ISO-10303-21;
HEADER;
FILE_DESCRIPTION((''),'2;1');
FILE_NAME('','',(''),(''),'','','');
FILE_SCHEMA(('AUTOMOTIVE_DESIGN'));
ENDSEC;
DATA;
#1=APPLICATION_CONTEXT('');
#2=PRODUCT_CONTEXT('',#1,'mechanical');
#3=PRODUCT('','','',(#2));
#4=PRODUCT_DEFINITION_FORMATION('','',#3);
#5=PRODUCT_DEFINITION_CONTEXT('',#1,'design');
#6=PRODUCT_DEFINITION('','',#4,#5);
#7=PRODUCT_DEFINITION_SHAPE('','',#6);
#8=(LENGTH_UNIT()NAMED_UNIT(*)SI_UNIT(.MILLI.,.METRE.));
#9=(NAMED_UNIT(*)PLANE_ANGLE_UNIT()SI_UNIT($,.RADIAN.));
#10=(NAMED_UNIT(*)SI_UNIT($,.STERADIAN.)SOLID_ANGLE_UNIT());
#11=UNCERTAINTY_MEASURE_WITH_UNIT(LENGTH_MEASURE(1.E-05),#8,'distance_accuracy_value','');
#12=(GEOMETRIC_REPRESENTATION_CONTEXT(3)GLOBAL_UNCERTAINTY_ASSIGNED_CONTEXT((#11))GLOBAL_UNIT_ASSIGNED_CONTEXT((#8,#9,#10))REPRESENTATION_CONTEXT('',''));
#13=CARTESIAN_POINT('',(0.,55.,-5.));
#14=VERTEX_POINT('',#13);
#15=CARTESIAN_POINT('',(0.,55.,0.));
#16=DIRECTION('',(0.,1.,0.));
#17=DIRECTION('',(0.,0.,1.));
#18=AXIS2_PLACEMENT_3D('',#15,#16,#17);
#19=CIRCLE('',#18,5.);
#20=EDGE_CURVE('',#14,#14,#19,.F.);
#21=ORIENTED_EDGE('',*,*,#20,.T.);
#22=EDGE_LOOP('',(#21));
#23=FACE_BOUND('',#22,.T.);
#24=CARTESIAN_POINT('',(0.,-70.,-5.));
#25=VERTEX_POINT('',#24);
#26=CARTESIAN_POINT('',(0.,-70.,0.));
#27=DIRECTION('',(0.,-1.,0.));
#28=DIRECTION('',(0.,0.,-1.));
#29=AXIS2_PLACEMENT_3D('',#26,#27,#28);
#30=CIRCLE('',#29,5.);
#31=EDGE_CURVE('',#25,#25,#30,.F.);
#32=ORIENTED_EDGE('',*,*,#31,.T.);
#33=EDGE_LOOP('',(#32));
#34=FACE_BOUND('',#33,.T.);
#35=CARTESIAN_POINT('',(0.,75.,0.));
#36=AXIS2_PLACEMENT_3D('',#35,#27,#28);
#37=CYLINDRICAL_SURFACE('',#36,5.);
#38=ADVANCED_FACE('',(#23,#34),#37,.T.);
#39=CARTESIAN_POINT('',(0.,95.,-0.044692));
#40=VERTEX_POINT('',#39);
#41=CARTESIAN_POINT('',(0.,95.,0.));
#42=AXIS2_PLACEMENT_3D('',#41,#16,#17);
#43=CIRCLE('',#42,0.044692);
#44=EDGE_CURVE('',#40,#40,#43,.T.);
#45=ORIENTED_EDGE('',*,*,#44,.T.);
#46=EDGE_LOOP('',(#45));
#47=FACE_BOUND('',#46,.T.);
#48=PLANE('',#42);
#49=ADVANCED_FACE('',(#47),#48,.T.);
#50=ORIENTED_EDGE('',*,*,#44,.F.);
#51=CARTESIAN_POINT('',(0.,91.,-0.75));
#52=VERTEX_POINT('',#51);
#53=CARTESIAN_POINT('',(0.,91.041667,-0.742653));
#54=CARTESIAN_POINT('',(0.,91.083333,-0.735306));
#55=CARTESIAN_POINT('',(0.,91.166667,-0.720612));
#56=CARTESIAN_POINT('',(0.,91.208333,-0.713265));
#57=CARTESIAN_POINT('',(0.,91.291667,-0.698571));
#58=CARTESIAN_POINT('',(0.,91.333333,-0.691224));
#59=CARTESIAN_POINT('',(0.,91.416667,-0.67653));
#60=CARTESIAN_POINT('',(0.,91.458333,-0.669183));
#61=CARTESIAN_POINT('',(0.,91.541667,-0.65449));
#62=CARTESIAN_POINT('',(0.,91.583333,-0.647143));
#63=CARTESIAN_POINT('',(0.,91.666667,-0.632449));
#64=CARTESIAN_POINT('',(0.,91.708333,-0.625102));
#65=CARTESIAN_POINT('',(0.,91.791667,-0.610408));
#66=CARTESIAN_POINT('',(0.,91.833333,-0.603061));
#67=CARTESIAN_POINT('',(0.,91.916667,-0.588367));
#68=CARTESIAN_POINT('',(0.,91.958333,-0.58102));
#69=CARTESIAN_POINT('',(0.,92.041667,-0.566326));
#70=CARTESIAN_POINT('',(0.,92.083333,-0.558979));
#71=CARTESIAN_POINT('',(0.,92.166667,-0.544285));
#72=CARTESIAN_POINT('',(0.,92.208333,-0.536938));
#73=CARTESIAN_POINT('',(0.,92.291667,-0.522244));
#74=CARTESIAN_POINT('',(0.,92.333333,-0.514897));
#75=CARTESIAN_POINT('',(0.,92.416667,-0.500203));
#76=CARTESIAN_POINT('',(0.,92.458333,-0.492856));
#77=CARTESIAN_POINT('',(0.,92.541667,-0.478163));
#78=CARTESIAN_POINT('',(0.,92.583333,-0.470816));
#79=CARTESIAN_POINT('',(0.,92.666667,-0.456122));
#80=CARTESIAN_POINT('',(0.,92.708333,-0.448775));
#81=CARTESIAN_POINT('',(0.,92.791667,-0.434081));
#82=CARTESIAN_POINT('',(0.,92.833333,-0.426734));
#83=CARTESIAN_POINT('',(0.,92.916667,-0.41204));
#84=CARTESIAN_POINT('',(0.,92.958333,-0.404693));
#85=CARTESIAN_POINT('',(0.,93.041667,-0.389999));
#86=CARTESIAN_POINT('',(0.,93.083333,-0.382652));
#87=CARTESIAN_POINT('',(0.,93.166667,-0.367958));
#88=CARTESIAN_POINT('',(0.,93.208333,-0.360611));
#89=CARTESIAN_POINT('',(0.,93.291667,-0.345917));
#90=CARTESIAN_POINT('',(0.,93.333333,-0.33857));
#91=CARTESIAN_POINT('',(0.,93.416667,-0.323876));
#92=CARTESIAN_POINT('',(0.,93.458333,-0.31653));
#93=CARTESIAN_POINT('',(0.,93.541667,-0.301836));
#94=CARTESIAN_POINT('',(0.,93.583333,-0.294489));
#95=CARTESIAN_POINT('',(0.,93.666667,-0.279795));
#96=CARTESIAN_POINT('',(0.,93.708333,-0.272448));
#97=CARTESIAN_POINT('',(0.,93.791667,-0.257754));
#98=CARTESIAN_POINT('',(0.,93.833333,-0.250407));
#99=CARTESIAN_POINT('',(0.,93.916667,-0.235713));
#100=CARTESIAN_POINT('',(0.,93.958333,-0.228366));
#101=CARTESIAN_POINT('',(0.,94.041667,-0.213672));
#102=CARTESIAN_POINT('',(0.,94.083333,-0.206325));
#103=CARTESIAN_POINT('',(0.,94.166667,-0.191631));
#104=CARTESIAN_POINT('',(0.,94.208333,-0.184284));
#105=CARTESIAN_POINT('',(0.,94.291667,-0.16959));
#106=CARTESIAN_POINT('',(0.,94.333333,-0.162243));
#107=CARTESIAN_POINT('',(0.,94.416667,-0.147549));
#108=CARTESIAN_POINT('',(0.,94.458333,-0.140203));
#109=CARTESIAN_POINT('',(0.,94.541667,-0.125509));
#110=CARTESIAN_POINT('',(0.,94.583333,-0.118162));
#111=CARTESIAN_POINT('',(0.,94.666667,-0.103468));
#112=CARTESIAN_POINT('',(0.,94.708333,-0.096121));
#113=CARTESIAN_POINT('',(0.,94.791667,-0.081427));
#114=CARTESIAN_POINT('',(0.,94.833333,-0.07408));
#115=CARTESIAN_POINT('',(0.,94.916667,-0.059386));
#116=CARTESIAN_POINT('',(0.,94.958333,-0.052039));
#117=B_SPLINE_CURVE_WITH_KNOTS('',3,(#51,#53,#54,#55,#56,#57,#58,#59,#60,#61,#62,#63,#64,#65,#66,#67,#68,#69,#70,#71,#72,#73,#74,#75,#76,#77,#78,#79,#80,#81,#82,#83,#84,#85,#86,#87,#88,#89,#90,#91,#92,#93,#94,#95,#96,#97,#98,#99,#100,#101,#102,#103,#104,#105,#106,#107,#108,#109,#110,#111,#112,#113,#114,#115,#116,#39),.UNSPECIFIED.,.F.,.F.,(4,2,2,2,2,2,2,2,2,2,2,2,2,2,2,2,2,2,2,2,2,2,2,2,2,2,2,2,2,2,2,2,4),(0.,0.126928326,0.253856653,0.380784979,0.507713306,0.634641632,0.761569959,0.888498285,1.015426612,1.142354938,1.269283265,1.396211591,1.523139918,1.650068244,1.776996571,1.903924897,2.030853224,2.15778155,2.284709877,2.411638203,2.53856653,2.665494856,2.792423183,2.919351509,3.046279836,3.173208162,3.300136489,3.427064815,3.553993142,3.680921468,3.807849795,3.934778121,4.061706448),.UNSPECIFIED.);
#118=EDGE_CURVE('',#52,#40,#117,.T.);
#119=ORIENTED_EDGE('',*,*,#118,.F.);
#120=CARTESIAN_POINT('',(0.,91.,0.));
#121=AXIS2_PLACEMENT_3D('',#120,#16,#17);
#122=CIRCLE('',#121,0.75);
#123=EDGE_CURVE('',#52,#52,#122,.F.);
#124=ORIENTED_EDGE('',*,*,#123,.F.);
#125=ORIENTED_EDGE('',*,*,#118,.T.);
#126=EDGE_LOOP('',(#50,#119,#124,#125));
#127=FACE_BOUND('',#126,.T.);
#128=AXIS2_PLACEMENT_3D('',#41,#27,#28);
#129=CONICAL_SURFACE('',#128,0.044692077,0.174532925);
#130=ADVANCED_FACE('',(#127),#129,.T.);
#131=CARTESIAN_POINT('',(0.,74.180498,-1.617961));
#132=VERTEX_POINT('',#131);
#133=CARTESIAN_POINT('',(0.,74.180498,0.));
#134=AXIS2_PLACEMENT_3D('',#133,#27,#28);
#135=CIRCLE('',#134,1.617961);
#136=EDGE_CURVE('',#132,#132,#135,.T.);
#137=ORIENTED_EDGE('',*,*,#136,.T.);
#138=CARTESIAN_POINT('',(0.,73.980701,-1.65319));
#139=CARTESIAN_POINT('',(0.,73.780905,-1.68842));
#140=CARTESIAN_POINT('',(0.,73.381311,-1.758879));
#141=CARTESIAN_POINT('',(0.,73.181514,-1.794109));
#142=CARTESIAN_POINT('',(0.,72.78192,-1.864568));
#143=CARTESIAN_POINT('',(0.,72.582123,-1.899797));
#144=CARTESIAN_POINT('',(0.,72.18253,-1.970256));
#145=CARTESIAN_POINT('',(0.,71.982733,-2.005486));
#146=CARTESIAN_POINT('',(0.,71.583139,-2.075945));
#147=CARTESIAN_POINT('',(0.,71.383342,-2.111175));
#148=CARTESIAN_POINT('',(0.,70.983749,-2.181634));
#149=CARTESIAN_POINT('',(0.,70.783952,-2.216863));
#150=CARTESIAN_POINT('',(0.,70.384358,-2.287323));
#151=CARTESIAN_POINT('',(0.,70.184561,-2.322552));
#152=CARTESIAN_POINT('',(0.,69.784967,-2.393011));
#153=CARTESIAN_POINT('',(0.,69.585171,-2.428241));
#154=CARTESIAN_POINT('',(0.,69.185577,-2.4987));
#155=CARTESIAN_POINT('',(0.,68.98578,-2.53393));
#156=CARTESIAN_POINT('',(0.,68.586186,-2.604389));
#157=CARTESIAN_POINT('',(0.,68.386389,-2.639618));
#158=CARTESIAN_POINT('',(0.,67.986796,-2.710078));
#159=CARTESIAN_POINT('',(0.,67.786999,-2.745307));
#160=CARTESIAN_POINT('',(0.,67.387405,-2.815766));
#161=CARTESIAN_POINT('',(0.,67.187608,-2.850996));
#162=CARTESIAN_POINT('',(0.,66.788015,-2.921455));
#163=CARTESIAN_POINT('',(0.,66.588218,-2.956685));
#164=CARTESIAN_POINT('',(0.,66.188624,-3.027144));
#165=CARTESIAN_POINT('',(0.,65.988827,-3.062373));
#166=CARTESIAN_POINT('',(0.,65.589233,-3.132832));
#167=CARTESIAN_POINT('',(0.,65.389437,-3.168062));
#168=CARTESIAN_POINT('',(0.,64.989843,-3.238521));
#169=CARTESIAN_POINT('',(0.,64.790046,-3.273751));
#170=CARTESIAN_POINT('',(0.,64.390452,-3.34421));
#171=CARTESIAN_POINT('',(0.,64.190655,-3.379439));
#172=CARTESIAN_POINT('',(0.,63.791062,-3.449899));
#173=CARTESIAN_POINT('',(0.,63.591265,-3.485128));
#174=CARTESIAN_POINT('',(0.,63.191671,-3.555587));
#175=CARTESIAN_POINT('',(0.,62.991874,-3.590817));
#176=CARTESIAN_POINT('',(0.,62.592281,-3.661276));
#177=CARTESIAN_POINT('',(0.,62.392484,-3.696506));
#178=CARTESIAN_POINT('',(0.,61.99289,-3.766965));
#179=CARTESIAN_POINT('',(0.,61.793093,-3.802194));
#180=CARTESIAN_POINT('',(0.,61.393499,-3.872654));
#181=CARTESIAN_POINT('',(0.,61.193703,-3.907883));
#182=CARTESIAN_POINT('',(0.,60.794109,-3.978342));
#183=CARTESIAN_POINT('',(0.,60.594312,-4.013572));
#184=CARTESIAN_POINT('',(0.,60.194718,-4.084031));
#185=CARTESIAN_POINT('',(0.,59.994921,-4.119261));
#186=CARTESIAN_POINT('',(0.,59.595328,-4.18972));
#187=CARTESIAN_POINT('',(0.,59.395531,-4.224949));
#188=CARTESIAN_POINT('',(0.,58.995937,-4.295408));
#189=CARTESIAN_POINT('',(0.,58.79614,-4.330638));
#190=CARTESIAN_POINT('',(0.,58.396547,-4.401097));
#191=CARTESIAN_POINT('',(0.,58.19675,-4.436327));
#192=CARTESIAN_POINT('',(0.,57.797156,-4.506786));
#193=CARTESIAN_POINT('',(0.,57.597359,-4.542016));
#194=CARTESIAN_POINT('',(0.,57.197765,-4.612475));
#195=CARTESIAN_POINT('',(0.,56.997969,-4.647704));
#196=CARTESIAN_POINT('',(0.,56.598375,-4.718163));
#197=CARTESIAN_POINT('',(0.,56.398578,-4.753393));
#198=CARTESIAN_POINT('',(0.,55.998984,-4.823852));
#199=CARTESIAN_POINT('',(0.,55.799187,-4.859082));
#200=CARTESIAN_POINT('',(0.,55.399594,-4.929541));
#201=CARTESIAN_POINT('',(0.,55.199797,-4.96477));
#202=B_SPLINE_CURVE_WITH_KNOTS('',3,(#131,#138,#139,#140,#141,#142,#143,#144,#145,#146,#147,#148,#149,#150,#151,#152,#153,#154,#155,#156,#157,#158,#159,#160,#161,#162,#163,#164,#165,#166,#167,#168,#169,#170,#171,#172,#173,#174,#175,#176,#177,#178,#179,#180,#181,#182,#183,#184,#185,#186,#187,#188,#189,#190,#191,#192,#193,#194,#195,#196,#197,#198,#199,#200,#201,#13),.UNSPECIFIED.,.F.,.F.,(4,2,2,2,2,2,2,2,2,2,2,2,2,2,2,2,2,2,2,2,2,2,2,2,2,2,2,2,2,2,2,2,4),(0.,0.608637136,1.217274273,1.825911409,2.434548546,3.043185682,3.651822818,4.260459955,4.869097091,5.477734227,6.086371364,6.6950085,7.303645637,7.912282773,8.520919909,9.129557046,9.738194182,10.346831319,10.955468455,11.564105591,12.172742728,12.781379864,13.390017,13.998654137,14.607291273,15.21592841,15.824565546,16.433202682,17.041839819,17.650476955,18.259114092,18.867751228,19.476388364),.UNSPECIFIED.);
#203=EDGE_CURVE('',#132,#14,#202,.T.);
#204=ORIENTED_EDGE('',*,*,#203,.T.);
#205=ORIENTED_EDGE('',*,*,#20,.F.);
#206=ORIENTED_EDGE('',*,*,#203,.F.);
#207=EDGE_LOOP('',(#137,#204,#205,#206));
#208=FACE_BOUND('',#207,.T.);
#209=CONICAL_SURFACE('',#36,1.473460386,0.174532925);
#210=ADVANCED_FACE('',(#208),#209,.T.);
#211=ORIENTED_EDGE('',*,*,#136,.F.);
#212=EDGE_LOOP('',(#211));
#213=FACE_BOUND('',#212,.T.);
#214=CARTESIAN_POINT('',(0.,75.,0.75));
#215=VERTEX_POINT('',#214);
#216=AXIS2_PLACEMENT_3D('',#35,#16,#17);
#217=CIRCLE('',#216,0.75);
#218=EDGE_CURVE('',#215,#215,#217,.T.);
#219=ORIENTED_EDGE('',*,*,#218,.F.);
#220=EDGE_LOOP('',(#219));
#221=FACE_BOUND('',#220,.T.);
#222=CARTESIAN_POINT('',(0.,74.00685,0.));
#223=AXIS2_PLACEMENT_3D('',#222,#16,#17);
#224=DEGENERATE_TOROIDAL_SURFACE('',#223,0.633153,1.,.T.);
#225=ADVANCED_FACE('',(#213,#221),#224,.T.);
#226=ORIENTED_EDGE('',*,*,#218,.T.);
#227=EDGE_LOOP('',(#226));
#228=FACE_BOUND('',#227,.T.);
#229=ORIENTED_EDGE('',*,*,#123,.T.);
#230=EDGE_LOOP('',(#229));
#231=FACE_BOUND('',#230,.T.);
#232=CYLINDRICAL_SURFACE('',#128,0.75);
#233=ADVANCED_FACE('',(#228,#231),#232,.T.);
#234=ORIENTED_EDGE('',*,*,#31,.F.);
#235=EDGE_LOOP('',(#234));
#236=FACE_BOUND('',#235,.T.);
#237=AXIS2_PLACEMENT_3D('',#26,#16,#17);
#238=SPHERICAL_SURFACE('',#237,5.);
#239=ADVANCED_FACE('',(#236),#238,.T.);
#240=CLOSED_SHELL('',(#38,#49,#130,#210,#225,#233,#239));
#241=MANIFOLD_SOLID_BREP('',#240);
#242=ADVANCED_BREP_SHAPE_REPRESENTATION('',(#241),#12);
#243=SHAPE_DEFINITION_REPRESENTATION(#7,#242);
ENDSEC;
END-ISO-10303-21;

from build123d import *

# Parameters (mm, degrees)
SKETCH1_R           = 5
BOSS_EXTRUDE1_DEPTH = 75
CHAMFER1_SIZE       = 20
CHAMFER1_SIZE2      = 3.526539614
FILLET1_R           = 5
SKETCH2_R           = 0.75
BOSS_EXTRUDE2_DEPTH = 20
CHAMFER2_SIZE       = 4
CHAMFER2_SIZE2      = 0.705307923
FILLET2_R           = 1


with BuildPart() as part:
    # Sketch1 → Boss-Extrude1 (new, symmetric)
    with BuildSketch(Plane(origin=(0, 0, 0), x_dir=(1, 0, 0), z_dir=(0, 1, 0))):
        with Locations(Location((0, 0, 0), (0, 0, 270))):
            Circle(SKETCH1_R)
    extrude(amount=BOSS_EXTRUDE1_DEPTH, both=True)

    # Chamfer1
    chamfer1_edges = [part.edges().sort_by_distance(p)[0] for p in [
        (0, 75, -5),
    ]]
    chamfer1_side = [part.faces().sort_by_distance(p)[0] for p in [
        (0, 0, -5),
    ]]
    chamfer(chamfer1_edges, length=CHAMFER1_SIZE, length2=CHAMFER1_SIZE2, reference=chamfer1_side[0])

    # Fillet1
    fillet1_edges = [part.edges().sort_by_distance(p)[0] for p in [
        (0, -75, -5),
    ]]
    fillet(fillet1_edges, radius=FILLET1_R)

    # Sketch2 → Boss-Extrude2 (add)
    with BuildSketch(Plane(origin=(0, 75, 0), x_dir=(1, 0, 0), z_dir=(0, 1, 0))):
        with Locations(Location((0, 0, 0), (0, 0, 270))):
            Circle(SKETCH2_R)
    extrude(amount=BOSS_EXTRUDE2_DEPTH)

    # Chamfer2
    chamfer2_edges = [part.edges().sort_by_distance(p)[0] for p in [
        (0, 95, -0.75),
    ]]
    chamfer2_side = [part.faces().sort_by_distance(p)[0] for p in [
        (0, 85, -0.75),
    ]]
    chamfer(chamfer2_edges, length=CHAMFER2_SIZE, length2=CHAMFER2_SIZE2, reference=chamfer2_side[0])

    # Fillet2
    # the kernel refuses this fillet: 1 mm, written as the material it takes off along each edge
    with BuildSketch(Plane(origin=(0, 75, 0), x_dir=(0, 0, 1), z_dir=(-1, 0, 0))) as fillet2_piece_1:
        with BuildLine():
            CenterArc((0.6331529, -0.993149916), FILLET2_R, 10, 73.289825559)
            Line((1.617960653, -0.819501738), (1.637656808, -0.816028775))
            Line((1.637656808, -0.816028775), (1.493156541, 0.003472964))
            Line((1.493156541, 0.003472964), (1.473460386, 0.02))
            ThreePointArc((1.473460386, 0.02), (1.111730193, 0.02), (0.752336942, 0.019862998))
            Line((0.752336942, 0.019862998), (0.75, 0))
        make_face()
    revolve(axis=Axis((0, 75, 0), (0, 1, 0)), mode=Mode.SUBTRACT)


solid = part.part
